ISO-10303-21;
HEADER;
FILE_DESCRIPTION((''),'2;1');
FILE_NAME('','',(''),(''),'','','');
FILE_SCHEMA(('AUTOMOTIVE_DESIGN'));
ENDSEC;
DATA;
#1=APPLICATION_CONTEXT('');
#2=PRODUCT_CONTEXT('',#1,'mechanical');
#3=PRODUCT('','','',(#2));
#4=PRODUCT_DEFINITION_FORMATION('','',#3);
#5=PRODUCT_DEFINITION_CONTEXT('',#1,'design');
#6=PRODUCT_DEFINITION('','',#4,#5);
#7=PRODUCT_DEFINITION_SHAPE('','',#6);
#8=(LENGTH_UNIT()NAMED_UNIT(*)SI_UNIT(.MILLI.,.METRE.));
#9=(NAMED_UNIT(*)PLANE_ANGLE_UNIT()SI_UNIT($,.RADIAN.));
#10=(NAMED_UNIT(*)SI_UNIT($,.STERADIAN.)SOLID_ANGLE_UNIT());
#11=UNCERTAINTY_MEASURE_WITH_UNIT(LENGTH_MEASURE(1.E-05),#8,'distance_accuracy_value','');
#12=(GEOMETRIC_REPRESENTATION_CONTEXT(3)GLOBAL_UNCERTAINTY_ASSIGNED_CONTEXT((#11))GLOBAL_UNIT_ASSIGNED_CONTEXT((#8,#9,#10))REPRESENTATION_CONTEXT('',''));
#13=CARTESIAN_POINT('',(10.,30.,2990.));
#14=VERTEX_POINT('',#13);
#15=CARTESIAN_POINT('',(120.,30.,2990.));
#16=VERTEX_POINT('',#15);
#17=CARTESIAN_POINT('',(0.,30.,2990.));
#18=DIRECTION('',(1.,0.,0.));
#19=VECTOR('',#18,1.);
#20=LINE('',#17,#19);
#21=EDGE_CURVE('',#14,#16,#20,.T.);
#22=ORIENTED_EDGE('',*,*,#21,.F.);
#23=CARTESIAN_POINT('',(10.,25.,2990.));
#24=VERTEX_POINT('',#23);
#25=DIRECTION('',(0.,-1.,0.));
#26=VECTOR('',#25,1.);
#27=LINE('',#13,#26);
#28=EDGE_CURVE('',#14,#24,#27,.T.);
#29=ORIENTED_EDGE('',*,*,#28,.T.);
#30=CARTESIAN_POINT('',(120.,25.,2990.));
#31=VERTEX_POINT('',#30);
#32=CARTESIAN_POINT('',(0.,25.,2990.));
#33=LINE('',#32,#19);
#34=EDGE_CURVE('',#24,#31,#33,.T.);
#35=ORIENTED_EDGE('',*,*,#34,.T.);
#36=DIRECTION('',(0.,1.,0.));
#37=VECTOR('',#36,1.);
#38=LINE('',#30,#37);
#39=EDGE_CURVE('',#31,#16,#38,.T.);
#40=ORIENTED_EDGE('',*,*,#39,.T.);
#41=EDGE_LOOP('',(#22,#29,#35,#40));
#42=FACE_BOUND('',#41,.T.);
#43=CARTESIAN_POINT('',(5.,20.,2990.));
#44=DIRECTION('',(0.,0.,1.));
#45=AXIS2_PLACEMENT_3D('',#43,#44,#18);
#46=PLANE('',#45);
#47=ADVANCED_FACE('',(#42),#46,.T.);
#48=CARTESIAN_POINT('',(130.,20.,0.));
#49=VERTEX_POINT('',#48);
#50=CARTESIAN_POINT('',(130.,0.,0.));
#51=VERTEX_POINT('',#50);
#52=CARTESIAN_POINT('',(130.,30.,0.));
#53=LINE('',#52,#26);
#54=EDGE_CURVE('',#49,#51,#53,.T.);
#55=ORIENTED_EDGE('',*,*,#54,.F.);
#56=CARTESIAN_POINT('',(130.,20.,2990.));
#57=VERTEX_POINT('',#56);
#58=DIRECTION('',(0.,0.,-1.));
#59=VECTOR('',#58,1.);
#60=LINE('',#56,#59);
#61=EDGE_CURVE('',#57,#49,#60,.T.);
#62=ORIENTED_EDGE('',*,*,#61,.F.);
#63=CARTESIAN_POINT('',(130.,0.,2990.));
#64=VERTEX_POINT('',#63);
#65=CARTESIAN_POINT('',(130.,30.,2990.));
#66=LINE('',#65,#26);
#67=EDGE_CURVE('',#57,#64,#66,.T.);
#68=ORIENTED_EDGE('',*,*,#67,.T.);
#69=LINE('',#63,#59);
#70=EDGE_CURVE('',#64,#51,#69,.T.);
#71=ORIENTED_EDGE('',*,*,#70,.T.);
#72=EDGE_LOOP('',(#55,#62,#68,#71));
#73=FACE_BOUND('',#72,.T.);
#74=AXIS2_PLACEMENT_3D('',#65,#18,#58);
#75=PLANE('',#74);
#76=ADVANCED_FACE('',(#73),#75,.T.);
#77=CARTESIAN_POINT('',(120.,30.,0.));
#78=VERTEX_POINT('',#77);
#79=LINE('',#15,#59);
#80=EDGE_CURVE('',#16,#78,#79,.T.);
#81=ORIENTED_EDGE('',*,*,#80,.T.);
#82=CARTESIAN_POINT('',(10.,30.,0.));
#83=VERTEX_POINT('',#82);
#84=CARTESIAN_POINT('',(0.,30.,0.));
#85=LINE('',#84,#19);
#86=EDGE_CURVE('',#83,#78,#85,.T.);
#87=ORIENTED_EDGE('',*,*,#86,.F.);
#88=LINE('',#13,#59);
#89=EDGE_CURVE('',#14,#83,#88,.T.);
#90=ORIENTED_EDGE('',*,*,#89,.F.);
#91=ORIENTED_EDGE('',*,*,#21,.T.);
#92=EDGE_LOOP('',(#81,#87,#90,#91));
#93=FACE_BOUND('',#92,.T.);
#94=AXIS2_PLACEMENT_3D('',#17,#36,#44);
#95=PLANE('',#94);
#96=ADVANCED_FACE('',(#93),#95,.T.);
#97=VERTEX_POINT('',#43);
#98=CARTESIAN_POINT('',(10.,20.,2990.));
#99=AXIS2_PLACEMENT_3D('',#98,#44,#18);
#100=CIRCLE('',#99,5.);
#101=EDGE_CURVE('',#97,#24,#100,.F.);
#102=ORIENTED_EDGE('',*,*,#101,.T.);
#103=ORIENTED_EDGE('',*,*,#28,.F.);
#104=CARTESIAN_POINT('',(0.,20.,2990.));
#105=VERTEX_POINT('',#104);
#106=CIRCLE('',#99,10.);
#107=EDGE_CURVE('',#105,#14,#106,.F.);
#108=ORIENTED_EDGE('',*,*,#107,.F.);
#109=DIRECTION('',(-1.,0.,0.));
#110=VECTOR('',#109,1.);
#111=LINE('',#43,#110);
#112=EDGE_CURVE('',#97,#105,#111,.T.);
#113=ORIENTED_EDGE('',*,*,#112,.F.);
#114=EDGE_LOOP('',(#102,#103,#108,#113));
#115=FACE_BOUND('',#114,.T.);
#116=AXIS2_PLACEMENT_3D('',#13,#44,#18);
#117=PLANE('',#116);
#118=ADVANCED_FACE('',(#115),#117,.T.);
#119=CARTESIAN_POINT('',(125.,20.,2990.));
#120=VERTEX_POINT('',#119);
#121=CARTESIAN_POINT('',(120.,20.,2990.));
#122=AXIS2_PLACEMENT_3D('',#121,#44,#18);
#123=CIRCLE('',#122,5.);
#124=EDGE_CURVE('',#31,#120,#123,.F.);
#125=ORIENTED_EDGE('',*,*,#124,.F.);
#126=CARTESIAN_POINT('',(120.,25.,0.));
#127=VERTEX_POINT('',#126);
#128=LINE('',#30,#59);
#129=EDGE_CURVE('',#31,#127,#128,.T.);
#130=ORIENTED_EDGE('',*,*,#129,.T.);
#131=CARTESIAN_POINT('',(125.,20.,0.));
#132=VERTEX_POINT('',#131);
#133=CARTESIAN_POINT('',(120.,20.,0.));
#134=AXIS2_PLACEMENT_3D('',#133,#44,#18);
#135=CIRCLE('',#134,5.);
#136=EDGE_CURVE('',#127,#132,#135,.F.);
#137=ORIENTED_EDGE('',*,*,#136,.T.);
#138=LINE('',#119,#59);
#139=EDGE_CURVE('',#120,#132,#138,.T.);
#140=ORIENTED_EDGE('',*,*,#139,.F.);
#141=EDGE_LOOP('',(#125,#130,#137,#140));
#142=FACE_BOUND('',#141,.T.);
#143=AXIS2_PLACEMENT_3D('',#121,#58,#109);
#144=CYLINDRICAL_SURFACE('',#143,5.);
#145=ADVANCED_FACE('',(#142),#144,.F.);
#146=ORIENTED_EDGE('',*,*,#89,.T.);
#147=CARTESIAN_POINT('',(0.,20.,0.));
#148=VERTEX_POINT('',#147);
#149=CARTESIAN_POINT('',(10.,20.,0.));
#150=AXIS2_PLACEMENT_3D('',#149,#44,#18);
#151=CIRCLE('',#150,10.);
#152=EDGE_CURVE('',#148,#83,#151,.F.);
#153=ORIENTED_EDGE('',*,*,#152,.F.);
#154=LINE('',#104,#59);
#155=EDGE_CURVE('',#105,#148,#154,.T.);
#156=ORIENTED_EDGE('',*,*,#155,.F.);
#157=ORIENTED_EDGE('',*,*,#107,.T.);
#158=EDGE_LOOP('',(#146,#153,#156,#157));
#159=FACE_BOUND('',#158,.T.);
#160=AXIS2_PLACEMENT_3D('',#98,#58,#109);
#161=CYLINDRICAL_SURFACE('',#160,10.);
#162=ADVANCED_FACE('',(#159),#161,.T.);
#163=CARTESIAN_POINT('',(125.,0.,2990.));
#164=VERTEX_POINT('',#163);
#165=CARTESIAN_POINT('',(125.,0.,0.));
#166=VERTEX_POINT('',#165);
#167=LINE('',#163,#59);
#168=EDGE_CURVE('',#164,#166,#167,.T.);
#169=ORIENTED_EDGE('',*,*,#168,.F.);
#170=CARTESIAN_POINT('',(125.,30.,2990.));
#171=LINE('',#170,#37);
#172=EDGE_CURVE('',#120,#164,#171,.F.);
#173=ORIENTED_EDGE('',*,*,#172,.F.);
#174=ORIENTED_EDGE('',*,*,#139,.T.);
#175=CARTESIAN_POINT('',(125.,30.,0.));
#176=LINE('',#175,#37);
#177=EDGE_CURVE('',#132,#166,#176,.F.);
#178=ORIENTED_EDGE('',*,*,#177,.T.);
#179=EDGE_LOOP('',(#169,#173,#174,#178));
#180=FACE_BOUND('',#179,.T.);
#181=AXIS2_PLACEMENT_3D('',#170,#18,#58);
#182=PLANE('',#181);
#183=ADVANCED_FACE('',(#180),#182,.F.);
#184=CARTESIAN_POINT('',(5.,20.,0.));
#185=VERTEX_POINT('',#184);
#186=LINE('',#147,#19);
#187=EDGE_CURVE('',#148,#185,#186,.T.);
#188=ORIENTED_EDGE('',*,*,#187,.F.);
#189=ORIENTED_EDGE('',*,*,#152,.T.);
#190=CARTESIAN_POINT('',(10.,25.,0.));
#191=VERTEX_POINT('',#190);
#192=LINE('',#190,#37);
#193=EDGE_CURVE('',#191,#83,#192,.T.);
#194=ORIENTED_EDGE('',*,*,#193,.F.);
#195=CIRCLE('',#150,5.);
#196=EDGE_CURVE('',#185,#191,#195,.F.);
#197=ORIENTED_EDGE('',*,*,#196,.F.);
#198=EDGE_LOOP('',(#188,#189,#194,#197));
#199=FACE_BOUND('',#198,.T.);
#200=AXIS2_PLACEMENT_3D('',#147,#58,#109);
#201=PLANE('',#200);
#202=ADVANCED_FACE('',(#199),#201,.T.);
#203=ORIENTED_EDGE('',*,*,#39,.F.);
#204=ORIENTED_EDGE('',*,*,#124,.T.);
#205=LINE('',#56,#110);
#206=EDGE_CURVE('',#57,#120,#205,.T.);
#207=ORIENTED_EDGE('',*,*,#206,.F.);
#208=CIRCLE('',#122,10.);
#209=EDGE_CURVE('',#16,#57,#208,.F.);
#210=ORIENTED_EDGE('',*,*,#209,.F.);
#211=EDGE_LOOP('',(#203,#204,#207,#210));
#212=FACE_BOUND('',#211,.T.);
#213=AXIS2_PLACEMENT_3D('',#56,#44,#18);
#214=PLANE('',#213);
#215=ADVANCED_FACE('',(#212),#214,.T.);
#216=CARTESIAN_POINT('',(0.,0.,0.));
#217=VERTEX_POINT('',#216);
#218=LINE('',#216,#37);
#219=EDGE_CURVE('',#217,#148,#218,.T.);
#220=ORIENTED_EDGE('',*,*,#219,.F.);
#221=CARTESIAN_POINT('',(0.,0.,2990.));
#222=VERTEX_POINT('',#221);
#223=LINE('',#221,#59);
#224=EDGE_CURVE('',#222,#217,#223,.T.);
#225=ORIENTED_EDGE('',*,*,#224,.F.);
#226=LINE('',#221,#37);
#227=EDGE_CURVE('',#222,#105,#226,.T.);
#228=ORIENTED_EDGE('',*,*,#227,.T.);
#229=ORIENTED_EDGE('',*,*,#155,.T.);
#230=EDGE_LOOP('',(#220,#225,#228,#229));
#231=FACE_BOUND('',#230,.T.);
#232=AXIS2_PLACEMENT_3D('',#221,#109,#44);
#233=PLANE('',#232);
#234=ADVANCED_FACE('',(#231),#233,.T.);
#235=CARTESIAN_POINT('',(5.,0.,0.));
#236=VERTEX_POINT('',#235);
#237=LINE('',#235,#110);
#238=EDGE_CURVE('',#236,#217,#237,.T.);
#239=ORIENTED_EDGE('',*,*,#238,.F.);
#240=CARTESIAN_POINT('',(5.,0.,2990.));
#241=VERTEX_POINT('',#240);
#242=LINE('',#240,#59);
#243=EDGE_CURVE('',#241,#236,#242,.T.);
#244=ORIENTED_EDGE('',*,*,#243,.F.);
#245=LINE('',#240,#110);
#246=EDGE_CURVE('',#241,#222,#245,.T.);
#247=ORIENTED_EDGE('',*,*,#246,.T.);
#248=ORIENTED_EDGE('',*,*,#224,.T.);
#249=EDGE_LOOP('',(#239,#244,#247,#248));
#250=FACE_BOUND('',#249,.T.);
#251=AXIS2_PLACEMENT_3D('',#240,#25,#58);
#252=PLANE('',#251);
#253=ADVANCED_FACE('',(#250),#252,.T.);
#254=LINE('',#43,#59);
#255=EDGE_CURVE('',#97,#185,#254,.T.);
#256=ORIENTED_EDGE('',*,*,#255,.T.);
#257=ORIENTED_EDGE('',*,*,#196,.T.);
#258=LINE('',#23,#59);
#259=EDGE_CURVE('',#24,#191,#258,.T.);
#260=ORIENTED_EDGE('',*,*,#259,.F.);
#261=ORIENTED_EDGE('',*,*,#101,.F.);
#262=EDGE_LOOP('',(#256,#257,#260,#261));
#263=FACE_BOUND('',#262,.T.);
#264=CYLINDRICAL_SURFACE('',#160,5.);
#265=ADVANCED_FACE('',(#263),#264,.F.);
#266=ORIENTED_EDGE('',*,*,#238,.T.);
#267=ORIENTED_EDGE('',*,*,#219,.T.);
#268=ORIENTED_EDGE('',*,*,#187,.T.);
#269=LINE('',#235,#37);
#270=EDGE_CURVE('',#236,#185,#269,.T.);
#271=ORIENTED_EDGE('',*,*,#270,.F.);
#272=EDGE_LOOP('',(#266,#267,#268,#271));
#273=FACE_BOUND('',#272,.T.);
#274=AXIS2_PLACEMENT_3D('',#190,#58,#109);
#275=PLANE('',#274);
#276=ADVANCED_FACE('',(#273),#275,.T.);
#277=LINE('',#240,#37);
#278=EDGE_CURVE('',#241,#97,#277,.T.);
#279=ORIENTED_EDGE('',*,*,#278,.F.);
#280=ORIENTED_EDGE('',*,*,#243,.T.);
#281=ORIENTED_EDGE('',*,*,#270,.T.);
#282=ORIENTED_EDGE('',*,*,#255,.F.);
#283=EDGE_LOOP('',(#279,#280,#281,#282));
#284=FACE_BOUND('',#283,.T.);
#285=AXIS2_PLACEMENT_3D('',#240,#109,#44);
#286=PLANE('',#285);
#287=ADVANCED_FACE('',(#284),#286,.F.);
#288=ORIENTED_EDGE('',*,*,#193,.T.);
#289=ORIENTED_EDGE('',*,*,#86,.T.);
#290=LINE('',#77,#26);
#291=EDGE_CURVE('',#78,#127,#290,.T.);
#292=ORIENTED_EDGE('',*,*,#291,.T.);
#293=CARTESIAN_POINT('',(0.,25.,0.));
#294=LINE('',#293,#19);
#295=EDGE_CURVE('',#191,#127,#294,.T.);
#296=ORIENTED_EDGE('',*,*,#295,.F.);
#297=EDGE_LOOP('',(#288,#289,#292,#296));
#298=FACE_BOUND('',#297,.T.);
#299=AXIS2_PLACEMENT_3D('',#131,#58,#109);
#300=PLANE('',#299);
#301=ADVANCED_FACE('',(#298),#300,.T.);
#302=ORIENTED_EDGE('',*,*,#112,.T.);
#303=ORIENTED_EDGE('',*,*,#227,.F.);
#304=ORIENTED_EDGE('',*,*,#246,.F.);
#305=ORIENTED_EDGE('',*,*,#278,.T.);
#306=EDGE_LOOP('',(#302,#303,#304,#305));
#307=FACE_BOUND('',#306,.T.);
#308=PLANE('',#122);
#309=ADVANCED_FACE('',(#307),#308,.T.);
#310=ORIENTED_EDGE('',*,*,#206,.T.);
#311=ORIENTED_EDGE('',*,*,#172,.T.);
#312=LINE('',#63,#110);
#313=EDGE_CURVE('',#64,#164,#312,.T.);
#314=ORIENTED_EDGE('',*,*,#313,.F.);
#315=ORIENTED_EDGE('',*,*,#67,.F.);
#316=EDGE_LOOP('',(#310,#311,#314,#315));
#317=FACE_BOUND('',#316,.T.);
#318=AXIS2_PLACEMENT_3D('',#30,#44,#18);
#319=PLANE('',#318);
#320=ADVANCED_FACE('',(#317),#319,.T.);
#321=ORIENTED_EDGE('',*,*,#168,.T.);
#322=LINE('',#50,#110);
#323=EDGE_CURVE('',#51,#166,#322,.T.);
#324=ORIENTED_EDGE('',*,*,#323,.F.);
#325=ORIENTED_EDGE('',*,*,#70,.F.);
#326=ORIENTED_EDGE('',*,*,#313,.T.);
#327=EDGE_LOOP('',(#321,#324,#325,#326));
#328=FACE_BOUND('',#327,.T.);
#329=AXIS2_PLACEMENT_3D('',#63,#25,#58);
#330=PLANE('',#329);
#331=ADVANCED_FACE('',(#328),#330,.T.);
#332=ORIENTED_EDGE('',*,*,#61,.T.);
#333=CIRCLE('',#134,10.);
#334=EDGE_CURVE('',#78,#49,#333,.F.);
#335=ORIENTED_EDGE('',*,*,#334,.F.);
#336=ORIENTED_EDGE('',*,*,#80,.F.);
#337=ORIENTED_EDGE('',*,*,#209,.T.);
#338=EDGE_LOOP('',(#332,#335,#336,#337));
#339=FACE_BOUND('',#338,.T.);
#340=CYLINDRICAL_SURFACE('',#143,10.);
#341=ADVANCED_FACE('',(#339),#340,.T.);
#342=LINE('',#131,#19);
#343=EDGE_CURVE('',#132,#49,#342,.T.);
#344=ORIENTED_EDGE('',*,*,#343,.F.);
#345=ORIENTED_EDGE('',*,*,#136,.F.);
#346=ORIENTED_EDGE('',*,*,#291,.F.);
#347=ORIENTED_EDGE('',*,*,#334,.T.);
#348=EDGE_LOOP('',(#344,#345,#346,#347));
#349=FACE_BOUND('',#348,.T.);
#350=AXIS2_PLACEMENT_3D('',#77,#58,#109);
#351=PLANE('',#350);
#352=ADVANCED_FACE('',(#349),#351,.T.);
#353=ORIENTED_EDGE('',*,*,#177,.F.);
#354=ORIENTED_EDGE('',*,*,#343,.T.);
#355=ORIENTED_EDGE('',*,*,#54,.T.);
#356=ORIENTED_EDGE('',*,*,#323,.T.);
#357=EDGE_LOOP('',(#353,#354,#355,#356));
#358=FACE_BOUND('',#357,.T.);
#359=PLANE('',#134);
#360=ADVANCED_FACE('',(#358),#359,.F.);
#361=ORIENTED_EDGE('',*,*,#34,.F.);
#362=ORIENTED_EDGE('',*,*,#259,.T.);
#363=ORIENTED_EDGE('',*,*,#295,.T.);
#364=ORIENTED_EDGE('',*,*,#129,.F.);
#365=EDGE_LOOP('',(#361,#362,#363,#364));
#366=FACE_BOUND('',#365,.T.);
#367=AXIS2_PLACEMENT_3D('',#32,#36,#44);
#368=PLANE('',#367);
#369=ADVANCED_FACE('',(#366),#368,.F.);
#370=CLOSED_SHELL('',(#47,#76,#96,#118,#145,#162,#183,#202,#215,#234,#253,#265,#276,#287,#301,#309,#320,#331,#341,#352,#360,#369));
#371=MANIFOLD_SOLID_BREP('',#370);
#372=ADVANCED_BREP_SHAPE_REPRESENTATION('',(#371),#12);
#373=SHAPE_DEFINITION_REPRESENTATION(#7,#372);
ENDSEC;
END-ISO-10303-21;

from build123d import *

# Parameters (mm, degrees)
TABAN_FLAN_1_DEPTH = 2990


# Sheet-metal steps are written as plain solids
with BuildPart() as part:
    # Çizim1 → Taban-Flanş1 (new body)
    with BuildSketch(Plane.XY):
        with BuildLine():
            Line((0, 0), (0, 20))
            ThreePointArc((0, 20), (2.928932188, 27.071067812), (10, 30))
            Line((10, 30), (120, 30))
            ThreePointArc((120, 30), (127.071067812, 27.071067812), (130, 20))
            Line((130, 20), (130, 0))
            Line((130, 0), (125, 0))
            Line((125, 0), (125, 20))
            ThreePointArc((125, 20), (123.535533906, 23.535533906), (120, 25))
            Line((120, 25), (10, 25))
            ThreePointArc((10, 25), (6.464466094, 23.535533906), (5, 20))
            Line((5, 20), (5, 0))
            Line((5, 0), (0, 0))
        make_face()
    extrude(amount=TABAN_FLAN_1_DEPTH)


solid = part.part
